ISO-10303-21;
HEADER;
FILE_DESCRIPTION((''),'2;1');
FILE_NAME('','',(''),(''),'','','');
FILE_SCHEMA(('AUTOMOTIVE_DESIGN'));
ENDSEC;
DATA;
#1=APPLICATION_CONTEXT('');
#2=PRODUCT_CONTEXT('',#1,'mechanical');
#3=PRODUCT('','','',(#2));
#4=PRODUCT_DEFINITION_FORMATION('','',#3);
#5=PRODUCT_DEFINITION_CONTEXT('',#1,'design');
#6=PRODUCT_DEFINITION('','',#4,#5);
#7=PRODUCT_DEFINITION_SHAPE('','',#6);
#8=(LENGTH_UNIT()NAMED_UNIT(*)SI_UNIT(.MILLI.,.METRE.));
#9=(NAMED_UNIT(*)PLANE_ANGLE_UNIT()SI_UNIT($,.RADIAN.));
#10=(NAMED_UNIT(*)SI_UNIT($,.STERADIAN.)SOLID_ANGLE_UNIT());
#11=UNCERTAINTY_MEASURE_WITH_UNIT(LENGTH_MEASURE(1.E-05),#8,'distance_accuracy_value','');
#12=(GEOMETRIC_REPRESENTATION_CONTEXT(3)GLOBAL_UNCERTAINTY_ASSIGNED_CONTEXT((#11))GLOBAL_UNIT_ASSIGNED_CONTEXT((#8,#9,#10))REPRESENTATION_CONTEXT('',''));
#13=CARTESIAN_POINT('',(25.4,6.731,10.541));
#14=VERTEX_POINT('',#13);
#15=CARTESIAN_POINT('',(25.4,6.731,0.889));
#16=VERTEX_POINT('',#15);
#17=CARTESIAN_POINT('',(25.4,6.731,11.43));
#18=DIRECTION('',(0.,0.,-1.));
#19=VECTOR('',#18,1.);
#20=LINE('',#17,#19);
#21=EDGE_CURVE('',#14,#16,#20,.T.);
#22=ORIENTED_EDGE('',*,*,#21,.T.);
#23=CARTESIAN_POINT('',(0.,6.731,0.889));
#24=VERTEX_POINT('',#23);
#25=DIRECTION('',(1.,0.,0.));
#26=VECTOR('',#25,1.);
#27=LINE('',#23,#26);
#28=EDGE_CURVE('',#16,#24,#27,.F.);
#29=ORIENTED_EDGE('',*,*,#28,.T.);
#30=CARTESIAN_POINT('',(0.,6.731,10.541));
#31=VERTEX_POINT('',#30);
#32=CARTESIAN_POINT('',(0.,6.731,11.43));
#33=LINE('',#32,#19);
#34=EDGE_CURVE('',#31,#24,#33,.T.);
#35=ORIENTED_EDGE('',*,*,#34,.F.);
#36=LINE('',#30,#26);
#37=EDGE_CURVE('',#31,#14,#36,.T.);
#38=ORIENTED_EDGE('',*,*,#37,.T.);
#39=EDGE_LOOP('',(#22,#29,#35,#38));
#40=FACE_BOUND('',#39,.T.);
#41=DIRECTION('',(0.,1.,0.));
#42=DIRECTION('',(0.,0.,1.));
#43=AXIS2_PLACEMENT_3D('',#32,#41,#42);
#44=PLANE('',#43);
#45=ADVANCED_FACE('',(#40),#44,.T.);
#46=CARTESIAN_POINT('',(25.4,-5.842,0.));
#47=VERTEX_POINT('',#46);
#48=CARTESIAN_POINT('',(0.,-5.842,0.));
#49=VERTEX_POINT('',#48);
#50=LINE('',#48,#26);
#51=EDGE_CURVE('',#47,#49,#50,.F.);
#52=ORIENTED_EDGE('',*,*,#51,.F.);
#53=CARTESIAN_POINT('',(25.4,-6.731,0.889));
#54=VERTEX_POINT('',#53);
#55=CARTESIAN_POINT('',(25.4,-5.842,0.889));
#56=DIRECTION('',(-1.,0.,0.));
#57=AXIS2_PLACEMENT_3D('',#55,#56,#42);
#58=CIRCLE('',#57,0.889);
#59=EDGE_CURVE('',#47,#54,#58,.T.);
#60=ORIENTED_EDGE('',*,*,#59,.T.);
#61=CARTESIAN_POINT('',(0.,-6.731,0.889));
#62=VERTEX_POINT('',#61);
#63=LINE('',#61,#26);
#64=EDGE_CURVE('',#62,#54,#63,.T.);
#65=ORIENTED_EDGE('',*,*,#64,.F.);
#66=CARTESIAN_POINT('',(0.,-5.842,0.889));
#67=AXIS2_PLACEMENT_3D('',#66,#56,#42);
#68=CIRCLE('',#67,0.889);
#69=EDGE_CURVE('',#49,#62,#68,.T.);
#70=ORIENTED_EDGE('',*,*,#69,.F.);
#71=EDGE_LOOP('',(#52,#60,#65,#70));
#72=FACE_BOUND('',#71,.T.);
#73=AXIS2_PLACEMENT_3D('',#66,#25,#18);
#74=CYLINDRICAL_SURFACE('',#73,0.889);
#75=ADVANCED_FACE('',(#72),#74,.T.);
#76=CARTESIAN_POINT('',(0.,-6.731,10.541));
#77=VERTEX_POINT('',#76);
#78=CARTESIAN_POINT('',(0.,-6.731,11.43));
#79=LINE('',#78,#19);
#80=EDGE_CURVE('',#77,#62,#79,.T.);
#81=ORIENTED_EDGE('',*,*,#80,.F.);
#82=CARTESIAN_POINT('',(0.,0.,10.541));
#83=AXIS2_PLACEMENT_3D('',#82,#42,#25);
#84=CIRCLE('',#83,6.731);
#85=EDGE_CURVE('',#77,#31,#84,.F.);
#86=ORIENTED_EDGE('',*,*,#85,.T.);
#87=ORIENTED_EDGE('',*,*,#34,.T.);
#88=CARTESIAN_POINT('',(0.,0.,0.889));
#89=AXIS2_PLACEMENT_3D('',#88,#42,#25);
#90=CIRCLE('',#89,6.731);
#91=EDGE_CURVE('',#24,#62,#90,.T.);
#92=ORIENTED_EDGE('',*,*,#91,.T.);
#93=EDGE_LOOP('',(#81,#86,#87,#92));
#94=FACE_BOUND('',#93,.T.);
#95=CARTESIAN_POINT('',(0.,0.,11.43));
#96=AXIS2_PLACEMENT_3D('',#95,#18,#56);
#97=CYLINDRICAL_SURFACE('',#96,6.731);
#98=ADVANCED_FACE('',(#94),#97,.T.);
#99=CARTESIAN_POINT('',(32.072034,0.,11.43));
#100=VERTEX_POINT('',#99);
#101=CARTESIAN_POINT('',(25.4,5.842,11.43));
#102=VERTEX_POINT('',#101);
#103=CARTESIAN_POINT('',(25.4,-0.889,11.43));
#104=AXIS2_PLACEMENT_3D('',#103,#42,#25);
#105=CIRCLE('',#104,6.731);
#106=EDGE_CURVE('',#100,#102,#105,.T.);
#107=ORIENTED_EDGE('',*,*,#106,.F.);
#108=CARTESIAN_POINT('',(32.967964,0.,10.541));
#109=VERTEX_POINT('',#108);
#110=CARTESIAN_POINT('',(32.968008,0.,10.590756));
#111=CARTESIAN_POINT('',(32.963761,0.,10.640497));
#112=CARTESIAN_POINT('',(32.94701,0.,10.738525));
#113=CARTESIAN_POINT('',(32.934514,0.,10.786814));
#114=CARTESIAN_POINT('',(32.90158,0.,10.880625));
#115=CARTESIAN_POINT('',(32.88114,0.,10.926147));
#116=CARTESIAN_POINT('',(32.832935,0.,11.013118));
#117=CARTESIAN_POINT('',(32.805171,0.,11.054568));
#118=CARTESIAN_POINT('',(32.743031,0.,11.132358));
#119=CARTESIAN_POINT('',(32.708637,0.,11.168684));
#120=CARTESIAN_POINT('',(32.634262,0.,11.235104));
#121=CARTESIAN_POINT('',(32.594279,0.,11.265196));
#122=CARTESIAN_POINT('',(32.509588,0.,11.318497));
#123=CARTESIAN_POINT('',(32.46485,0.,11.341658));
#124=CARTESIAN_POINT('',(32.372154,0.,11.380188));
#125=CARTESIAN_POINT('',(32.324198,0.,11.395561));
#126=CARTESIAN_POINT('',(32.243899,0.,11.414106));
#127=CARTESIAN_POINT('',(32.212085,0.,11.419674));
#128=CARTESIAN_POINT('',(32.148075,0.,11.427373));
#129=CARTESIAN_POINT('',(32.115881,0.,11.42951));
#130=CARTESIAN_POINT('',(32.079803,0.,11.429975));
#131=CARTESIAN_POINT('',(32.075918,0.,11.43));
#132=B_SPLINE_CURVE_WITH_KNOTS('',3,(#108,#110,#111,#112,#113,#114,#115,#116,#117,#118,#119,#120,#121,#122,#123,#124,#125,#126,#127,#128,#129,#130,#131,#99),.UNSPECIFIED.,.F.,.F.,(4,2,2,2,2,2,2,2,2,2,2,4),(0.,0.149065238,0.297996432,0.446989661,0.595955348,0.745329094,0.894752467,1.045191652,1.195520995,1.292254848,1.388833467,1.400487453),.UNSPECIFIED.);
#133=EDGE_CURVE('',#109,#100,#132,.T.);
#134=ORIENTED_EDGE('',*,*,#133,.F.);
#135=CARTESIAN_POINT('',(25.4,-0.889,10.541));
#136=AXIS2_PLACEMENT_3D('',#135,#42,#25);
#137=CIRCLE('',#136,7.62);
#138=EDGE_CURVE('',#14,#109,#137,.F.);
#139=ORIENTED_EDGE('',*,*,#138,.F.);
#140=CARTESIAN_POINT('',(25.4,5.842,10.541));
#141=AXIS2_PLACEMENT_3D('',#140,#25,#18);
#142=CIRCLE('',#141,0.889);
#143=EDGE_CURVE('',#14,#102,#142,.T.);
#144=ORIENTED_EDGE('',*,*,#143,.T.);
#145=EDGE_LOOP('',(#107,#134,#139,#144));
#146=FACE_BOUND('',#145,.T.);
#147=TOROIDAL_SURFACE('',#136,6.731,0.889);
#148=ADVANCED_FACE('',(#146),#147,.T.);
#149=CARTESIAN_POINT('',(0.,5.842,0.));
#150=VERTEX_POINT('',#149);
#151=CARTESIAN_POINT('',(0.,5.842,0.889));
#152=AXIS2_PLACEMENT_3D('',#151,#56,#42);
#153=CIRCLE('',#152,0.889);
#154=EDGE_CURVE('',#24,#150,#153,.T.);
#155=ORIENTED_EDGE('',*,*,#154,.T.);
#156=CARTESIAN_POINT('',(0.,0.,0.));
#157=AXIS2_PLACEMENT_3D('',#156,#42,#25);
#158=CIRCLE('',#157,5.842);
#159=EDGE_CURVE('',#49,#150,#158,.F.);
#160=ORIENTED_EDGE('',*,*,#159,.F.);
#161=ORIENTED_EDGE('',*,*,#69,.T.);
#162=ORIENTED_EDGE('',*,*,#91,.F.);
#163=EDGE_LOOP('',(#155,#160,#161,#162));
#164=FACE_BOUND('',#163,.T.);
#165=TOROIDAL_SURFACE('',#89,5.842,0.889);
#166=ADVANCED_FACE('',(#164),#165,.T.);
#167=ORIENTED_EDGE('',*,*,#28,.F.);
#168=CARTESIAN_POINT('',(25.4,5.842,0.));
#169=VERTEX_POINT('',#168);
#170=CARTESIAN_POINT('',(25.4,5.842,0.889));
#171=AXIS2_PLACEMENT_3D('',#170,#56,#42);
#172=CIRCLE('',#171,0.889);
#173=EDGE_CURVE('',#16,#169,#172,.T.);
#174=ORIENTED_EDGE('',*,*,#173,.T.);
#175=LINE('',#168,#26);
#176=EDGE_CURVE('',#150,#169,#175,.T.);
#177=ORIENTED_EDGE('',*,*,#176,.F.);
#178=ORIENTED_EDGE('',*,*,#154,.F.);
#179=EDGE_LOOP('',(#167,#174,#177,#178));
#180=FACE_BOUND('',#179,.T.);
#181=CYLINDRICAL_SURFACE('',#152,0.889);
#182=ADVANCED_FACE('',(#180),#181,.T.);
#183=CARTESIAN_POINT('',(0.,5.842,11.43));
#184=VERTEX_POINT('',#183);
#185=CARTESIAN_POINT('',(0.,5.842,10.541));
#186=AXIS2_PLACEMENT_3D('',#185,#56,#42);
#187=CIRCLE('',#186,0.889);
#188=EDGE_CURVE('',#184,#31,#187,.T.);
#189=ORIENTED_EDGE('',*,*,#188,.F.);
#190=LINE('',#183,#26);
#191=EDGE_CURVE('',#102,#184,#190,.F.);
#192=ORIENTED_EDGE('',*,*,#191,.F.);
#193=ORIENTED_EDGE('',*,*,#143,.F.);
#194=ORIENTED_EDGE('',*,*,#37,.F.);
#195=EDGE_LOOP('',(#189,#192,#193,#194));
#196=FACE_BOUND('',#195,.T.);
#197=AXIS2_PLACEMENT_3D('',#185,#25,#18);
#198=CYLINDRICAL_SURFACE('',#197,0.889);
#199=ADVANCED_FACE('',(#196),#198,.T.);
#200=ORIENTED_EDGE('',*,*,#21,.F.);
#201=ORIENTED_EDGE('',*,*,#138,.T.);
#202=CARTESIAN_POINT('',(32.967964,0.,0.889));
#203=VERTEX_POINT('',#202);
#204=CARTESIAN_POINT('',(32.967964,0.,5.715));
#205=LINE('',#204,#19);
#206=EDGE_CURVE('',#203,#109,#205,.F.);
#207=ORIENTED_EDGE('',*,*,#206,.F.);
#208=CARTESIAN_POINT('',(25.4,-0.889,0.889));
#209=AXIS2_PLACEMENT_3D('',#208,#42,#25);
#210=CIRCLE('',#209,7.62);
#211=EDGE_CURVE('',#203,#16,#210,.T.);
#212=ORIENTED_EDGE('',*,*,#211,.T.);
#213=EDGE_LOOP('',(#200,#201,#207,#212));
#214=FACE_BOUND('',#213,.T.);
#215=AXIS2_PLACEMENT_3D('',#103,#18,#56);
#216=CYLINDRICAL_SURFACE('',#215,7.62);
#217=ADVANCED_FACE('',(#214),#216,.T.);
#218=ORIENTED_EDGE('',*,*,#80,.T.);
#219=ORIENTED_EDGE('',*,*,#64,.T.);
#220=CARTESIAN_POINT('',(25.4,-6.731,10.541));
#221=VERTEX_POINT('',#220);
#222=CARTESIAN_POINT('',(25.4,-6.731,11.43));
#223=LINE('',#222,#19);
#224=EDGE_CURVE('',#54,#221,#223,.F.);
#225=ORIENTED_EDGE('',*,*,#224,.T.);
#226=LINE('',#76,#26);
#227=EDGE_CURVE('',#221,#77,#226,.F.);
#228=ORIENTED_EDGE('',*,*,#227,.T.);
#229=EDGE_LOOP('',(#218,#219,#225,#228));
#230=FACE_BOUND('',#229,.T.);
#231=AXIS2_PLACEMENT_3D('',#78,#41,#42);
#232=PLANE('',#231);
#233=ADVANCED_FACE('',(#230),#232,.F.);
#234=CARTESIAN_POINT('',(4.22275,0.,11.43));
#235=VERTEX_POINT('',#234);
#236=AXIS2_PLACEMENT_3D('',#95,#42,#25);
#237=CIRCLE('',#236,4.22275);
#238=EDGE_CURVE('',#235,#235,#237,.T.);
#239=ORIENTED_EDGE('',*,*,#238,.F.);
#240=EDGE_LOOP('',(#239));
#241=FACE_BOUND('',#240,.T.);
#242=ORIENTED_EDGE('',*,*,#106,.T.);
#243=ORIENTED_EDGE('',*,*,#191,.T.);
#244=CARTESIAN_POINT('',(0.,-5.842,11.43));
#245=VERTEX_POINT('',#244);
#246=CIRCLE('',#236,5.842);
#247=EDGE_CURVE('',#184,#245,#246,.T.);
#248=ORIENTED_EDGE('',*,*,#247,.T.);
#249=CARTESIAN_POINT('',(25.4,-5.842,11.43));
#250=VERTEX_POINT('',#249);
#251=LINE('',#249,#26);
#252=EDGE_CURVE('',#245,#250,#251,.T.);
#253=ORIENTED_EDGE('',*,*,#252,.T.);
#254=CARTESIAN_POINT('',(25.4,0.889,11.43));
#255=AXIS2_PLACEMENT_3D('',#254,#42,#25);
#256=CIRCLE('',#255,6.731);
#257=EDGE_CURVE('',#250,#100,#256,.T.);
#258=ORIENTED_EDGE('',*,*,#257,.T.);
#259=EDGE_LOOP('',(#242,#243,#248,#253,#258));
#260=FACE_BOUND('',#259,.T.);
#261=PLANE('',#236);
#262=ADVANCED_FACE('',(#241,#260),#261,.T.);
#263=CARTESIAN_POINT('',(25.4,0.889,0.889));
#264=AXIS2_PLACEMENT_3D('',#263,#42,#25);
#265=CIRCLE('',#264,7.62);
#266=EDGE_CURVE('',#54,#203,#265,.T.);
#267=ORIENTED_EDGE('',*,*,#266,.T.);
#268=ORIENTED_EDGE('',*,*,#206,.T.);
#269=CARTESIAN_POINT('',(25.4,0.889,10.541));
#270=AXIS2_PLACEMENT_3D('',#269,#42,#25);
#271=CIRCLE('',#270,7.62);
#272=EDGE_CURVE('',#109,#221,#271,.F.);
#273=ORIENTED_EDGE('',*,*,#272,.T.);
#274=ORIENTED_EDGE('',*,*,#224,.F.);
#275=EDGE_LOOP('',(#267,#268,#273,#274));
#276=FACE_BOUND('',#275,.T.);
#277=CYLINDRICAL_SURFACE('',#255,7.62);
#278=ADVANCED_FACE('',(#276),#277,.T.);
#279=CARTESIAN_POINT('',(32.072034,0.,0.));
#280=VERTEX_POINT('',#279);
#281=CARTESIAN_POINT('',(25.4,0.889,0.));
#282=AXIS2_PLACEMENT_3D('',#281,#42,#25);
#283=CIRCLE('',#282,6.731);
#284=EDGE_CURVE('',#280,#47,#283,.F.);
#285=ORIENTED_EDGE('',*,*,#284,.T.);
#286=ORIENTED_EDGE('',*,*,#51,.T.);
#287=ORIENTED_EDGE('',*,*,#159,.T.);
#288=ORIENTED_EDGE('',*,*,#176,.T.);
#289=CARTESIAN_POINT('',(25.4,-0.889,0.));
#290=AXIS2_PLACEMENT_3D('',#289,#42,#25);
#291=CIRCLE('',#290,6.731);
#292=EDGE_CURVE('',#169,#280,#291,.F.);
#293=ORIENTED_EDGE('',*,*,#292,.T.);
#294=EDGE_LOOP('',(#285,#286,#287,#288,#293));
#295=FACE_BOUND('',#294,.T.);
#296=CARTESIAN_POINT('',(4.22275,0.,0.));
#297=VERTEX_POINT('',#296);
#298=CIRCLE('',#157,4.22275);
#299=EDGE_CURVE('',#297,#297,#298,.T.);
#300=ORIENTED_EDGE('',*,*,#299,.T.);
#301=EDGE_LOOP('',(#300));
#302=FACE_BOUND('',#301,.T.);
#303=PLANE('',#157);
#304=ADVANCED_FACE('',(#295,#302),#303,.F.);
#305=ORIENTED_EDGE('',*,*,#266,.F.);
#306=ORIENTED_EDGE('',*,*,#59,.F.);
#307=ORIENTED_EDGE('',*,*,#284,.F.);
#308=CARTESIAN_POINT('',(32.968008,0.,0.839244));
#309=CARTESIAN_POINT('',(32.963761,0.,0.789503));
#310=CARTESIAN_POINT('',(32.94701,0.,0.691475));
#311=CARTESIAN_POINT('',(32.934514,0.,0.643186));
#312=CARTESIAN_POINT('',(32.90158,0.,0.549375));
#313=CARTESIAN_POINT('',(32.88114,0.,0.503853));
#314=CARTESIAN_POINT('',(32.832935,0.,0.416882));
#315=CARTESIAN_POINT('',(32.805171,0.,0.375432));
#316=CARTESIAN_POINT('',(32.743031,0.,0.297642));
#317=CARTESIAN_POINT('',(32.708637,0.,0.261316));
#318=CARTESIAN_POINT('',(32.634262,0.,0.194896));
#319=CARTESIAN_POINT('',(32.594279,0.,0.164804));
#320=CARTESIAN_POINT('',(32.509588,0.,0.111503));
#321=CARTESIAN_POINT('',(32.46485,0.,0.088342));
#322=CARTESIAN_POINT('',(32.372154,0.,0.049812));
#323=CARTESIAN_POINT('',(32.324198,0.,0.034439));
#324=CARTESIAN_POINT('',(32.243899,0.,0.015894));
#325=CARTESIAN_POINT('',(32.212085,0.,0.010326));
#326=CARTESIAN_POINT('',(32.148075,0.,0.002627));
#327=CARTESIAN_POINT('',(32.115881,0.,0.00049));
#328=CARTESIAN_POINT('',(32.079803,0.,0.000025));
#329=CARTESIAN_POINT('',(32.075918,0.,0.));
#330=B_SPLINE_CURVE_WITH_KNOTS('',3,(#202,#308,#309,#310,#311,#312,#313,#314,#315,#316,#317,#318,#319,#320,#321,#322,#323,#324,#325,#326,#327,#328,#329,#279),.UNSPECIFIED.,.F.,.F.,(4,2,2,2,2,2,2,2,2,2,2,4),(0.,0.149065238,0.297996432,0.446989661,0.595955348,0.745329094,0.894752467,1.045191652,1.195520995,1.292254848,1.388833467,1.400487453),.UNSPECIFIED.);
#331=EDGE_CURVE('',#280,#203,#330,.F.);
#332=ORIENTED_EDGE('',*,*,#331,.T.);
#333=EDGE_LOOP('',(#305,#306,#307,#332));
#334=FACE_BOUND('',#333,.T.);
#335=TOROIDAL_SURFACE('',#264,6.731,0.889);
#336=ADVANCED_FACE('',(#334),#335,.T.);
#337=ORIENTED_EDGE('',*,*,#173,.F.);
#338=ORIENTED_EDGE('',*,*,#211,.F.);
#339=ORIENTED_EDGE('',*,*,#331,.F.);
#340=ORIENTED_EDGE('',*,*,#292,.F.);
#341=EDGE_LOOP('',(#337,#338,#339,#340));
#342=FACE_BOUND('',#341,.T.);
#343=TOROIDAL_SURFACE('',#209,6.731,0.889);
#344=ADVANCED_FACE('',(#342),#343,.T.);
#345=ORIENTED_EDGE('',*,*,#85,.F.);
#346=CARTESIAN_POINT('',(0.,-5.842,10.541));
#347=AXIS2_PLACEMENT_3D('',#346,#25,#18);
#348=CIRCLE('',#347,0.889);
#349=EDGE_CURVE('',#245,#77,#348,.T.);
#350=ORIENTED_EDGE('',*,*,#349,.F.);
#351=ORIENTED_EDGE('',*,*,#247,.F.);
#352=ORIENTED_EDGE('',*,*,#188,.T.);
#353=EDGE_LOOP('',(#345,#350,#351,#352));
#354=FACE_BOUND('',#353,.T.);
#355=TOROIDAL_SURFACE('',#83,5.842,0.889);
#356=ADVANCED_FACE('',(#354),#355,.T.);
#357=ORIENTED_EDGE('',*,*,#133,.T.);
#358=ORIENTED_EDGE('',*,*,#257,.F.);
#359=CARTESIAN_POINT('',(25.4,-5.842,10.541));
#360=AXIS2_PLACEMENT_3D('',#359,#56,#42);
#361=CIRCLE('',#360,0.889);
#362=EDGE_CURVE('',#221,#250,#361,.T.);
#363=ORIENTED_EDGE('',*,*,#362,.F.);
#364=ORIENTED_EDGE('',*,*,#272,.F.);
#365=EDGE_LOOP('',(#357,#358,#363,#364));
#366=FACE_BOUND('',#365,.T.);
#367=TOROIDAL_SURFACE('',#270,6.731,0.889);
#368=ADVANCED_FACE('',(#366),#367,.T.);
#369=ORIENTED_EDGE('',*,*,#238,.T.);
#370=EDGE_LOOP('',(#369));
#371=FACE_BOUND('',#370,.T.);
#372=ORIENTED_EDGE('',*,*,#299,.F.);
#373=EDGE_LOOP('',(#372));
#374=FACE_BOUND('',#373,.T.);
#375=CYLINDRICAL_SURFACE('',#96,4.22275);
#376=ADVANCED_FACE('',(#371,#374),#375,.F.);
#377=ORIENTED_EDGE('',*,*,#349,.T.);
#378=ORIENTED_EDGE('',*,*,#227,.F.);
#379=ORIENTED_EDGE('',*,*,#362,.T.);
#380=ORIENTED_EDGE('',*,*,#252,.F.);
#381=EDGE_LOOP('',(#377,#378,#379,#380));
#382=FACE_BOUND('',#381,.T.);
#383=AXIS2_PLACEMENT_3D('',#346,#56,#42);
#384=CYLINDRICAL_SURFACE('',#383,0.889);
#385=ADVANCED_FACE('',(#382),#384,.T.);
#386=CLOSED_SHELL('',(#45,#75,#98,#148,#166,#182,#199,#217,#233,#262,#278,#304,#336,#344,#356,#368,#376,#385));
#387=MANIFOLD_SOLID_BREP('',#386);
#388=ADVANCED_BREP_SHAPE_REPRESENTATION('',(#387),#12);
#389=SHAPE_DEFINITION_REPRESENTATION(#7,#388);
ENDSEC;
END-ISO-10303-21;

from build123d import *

# Parameters (mm, degrees)
SKETCH1_R           = 6.731
SKETCH1_R_2         = 4.22275
BOSS_EXTRUDE1_DEPTH = 11.43
FRONT_FILLET_R      = 7.62
SIDE_FILLET_R       = 0.889


with BuildPart() as part:
    # Sketch1 → Boss-Extrude1 (new body)
    # profile 1 of 2: a face of its own
    with BuildSketch(Plane.XY):
        with BuildLine():
            Line((33.02, 6.731), (0, 6.731))
            ThreePointArc((0, 6.731), (4.759535744, 4.759535744), (6.731, 0))
            ThreePointArc((6.731, 0), (4.759535744, -4.759535744), (0, -6.731))
            Line((0, -6.731), (33.02, -6.731))
            Line((33.02, -6.731), (33.02, 6.731))
        make_face()
    # profile 2 of 2: a face of its own
    with BuildSketch(Plane.XY):
        Circle(SKETCH1_R)
        Circle(SKETCH1_R_2, mode=Mode.SUBTRACT)
    extrude(amount=BOSS_EXTRUDE1_DEPTH)

    # Front Fillet
    # the kernel refuses this fillet: 7.62 mm, written as the material it takes off along each edge
    with BuildSketch(Plane(origin=(33.02, -6.731, -19.05), x_dir=(-1, 0, 0), z_dir=(0, 0, 1)), Plane(origin=(33.02, 6.731, -19.05), x_dir=(0, -1, 0), z_dir=(0, 0, 1))) as front_fillet_piece_1:
        with BuildLine():
            CenterArc((FRONT_FILLET_R, -FRONT_FILLET_R), FRONT_FILLET_R, 90, 90)
            Line((0, -FRONT_FILLET_R), (0, 0))
            Line((0, 0), (FRONT_FILLET_R, 0))
        make_face()
    extrude(amount=49.53, mode=Mode.SUBTRACT)

    # Side Fillet
    side_fillet_edges = [part.edges().sort_by_distance(p)[0] for p in [
        (-6.731, 0, 11.43),
        (12.7, -6.731, 11.43),
        (30.464100117, 4.80479399, 0),
        (30.464100117, -4.80479399, 0),
        (30.464100117, 4.80479399, 11.43),
        (30.464100117, -4.80479399, 11.43),
        (12.7, 6.731, 11.43),
        (12.7, -6.731, 0),
        (-6.731, 0, 0),
        (12.7, 6.731, 0),
    ]]
    fillet(side_fillet_edges, radius=SIDE_FILLET_R)


solid = part.part
